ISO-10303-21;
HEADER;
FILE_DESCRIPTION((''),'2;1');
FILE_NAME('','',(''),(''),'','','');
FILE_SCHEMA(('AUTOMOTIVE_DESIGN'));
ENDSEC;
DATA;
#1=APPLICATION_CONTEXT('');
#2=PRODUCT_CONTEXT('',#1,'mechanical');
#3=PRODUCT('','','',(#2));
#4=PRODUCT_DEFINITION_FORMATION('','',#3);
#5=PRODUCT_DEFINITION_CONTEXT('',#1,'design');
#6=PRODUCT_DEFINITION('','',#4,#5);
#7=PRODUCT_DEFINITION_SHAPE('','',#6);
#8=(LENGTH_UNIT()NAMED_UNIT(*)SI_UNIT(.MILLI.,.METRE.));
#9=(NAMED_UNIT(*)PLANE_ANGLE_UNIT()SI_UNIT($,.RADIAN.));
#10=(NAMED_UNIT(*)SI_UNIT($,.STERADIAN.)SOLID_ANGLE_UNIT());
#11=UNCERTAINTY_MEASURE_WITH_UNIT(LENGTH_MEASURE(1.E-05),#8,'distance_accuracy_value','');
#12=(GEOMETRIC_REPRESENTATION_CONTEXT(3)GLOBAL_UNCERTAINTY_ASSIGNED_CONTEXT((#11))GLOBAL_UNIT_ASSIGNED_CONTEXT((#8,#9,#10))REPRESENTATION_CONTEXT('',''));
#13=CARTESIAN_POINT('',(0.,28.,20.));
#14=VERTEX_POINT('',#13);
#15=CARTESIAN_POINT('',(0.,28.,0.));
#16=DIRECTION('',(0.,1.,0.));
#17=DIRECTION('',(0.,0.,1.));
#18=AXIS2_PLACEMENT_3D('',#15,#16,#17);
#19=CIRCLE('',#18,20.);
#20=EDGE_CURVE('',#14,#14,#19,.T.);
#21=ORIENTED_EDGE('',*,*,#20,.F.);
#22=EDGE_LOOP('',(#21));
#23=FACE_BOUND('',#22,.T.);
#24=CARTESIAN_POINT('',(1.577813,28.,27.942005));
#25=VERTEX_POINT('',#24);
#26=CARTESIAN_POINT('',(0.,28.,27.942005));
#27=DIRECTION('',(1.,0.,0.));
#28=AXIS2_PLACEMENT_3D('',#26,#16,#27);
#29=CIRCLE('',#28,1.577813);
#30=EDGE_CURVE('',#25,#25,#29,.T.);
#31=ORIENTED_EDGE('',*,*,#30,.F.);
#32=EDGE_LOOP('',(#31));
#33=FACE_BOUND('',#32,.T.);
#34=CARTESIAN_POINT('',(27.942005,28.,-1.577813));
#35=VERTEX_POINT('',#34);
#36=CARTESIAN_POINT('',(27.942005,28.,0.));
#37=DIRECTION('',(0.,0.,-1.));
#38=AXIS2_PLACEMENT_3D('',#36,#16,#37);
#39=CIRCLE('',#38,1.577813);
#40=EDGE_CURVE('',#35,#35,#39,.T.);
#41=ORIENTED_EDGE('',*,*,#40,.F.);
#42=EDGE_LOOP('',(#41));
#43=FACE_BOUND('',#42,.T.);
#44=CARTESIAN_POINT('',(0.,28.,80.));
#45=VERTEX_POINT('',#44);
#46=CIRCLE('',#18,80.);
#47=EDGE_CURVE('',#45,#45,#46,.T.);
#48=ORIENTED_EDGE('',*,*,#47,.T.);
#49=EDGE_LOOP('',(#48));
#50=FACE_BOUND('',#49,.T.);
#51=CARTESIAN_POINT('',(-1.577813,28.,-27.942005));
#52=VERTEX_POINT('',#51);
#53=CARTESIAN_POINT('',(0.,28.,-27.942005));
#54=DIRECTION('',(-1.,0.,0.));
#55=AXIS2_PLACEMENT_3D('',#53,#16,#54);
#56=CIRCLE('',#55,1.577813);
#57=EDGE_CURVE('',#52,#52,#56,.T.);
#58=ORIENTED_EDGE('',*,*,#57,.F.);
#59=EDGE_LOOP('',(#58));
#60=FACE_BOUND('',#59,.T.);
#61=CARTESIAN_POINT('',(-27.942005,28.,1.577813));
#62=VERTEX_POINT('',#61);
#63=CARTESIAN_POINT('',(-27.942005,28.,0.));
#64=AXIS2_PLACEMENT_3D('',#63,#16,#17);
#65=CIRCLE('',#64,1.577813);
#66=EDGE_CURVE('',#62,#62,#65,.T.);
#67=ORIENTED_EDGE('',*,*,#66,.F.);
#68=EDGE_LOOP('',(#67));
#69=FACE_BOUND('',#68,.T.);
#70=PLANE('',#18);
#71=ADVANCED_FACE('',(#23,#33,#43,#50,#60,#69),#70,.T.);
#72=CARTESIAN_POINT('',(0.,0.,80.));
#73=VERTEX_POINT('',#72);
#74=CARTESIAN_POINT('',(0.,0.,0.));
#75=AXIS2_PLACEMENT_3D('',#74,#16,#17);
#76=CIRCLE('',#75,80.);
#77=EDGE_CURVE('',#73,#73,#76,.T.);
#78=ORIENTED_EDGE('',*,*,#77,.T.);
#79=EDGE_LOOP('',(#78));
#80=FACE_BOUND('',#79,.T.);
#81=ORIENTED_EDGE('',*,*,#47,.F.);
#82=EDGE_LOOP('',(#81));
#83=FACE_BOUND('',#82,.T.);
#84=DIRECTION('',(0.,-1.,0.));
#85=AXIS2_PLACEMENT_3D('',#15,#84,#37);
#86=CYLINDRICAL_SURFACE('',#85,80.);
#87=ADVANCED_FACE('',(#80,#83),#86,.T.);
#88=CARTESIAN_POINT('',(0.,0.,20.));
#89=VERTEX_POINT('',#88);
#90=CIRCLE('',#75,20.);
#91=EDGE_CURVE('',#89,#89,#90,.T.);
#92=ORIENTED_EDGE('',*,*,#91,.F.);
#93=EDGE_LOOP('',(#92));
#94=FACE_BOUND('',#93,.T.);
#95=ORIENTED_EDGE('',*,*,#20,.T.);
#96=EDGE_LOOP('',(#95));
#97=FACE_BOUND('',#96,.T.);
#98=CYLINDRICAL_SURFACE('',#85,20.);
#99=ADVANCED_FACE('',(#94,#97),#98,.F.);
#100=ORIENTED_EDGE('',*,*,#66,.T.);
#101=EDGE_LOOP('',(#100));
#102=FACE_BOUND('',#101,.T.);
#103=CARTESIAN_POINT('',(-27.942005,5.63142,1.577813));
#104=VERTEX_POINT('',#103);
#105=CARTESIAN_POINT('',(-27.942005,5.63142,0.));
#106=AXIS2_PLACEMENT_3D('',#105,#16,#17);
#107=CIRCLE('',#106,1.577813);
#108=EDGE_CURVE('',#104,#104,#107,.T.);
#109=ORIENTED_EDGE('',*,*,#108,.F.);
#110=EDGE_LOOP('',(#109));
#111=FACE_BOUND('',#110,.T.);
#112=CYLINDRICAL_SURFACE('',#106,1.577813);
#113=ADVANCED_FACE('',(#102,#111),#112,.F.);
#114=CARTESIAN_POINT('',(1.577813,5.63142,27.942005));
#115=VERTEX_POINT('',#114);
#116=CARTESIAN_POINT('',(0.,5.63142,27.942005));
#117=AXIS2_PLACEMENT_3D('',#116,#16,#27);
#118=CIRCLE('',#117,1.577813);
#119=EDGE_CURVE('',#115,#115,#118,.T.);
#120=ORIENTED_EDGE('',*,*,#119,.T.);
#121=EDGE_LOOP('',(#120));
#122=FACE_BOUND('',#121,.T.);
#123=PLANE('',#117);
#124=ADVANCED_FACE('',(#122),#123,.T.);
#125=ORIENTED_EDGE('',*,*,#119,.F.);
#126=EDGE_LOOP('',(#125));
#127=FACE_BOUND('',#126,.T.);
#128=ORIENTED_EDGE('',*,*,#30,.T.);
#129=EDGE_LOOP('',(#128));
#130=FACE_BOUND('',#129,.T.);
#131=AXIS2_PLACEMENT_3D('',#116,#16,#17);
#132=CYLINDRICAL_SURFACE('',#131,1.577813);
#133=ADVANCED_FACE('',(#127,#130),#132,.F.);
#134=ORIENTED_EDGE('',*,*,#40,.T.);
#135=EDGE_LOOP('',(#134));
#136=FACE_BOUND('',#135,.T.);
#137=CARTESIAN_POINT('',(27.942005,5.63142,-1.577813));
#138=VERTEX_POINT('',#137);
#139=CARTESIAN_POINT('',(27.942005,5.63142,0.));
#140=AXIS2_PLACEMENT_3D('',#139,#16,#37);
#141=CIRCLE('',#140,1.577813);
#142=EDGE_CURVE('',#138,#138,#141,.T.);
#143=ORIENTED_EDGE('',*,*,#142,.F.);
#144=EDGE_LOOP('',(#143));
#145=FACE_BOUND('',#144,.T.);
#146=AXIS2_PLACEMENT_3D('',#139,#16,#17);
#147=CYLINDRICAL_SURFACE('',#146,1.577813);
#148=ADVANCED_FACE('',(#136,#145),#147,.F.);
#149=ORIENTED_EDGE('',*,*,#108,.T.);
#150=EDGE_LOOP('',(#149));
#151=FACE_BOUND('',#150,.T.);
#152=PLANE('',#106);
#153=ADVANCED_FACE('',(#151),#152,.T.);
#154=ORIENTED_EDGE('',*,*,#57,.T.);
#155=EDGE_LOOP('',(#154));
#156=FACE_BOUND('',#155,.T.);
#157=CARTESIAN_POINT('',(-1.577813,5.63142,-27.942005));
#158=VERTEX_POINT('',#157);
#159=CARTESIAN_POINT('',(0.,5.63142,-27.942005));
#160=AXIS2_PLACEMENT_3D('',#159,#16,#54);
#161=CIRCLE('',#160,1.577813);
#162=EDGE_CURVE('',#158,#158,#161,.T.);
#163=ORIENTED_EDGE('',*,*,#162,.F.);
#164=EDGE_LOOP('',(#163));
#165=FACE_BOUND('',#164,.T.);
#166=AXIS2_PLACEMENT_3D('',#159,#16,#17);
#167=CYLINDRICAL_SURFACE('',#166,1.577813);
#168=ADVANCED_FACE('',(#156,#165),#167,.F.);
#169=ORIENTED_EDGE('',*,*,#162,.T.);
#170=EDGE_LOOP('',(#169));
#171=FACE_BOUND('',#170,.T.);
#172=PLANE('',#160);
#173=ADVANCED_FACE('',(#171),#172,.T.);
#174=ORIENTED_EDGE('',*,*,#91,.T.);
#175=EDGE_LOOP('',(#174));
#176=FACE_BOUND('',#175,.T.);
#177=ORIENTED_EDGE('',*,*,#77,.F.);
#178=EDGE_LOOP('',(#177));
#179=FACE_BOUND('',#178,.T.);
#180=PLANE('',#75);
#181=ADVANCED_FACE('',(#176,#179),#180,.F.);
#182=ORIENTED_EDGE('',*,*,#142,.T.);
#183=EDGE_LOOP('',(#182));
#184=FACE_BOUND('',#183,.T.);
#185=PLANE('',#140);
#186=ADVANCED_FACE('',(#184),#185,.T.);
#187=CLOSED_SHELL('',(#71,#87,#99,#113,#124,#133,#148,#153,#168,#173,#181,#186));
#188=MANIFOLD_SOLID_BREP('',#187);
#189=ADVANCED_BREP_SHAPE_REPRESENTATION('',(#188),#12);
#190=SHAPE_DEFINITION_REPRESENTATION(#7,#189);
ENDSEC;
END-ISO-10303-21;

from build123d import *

# Parameters (mm, degrees)
SKETCH1_R           = 80
BOSS_EXTRUDE1_DEPTH = 28
SKETCH2_R           = 20
CUT_EXTRUDE1_DEPTH  = 117.550418275
SKETCH3_R           = 1.57781304
CUT_EXTRUDE2_DEPTH  = 22.368580383
CIRPATTERN1_COUNT   = 4


with BuildPart() as part:
    # Sketch1 → Boss-Extrude1 (new body)
    with BuildSketch(Plane(origin=(0, 0, 0), x_dir=(1, 0, 0), z_dir=(0, 1, 0))):
        Circle(SKETCH1_R)
    extrude(amount=BOSS_EXTRUDE1_DEPTH)

    # Sketch2 → Cut-Extrude1 (cut, through all)
    with BuildSketch(Plane(origin=(0, 0, 0), x_dir=(1, 0, 0), z_dir=(0, 1, 0))):
        Circle(SKETCH2_R)
    extrude(amount=CUT_EXTRUDE1_DEPTH, mode=Mode.SUBTRACT)

    # Sketch3 → Cut-Extrude2 (cut)
    with BuildSketch(Plane(origin=(0, 28, 0), x_dir=(1, 0, 0), z_dir=(0, 1, 0))):
        with Locations((-27.942004603, 0)):
            Circle(SKETCH3_R)
    cut_extrude2 = extrude(amount=-CUT_EXTRUDE2_DEPTH, mode=Mode.SUBTRACT)

    # CirPattern1: Cut-Extrude2 ×4 about axis
    cirpattern1_axis = Axis((0, 0, 0), (0, 1, 0))
    for i in range(1, CIRPATTERN1_COUNT):
        add(cut_extrude2.rotate(cirpattern1_axis, i * 360 / CIRPATTERN1_COUNT), mode=Mode.SUBTRACT)


solid = part.part
